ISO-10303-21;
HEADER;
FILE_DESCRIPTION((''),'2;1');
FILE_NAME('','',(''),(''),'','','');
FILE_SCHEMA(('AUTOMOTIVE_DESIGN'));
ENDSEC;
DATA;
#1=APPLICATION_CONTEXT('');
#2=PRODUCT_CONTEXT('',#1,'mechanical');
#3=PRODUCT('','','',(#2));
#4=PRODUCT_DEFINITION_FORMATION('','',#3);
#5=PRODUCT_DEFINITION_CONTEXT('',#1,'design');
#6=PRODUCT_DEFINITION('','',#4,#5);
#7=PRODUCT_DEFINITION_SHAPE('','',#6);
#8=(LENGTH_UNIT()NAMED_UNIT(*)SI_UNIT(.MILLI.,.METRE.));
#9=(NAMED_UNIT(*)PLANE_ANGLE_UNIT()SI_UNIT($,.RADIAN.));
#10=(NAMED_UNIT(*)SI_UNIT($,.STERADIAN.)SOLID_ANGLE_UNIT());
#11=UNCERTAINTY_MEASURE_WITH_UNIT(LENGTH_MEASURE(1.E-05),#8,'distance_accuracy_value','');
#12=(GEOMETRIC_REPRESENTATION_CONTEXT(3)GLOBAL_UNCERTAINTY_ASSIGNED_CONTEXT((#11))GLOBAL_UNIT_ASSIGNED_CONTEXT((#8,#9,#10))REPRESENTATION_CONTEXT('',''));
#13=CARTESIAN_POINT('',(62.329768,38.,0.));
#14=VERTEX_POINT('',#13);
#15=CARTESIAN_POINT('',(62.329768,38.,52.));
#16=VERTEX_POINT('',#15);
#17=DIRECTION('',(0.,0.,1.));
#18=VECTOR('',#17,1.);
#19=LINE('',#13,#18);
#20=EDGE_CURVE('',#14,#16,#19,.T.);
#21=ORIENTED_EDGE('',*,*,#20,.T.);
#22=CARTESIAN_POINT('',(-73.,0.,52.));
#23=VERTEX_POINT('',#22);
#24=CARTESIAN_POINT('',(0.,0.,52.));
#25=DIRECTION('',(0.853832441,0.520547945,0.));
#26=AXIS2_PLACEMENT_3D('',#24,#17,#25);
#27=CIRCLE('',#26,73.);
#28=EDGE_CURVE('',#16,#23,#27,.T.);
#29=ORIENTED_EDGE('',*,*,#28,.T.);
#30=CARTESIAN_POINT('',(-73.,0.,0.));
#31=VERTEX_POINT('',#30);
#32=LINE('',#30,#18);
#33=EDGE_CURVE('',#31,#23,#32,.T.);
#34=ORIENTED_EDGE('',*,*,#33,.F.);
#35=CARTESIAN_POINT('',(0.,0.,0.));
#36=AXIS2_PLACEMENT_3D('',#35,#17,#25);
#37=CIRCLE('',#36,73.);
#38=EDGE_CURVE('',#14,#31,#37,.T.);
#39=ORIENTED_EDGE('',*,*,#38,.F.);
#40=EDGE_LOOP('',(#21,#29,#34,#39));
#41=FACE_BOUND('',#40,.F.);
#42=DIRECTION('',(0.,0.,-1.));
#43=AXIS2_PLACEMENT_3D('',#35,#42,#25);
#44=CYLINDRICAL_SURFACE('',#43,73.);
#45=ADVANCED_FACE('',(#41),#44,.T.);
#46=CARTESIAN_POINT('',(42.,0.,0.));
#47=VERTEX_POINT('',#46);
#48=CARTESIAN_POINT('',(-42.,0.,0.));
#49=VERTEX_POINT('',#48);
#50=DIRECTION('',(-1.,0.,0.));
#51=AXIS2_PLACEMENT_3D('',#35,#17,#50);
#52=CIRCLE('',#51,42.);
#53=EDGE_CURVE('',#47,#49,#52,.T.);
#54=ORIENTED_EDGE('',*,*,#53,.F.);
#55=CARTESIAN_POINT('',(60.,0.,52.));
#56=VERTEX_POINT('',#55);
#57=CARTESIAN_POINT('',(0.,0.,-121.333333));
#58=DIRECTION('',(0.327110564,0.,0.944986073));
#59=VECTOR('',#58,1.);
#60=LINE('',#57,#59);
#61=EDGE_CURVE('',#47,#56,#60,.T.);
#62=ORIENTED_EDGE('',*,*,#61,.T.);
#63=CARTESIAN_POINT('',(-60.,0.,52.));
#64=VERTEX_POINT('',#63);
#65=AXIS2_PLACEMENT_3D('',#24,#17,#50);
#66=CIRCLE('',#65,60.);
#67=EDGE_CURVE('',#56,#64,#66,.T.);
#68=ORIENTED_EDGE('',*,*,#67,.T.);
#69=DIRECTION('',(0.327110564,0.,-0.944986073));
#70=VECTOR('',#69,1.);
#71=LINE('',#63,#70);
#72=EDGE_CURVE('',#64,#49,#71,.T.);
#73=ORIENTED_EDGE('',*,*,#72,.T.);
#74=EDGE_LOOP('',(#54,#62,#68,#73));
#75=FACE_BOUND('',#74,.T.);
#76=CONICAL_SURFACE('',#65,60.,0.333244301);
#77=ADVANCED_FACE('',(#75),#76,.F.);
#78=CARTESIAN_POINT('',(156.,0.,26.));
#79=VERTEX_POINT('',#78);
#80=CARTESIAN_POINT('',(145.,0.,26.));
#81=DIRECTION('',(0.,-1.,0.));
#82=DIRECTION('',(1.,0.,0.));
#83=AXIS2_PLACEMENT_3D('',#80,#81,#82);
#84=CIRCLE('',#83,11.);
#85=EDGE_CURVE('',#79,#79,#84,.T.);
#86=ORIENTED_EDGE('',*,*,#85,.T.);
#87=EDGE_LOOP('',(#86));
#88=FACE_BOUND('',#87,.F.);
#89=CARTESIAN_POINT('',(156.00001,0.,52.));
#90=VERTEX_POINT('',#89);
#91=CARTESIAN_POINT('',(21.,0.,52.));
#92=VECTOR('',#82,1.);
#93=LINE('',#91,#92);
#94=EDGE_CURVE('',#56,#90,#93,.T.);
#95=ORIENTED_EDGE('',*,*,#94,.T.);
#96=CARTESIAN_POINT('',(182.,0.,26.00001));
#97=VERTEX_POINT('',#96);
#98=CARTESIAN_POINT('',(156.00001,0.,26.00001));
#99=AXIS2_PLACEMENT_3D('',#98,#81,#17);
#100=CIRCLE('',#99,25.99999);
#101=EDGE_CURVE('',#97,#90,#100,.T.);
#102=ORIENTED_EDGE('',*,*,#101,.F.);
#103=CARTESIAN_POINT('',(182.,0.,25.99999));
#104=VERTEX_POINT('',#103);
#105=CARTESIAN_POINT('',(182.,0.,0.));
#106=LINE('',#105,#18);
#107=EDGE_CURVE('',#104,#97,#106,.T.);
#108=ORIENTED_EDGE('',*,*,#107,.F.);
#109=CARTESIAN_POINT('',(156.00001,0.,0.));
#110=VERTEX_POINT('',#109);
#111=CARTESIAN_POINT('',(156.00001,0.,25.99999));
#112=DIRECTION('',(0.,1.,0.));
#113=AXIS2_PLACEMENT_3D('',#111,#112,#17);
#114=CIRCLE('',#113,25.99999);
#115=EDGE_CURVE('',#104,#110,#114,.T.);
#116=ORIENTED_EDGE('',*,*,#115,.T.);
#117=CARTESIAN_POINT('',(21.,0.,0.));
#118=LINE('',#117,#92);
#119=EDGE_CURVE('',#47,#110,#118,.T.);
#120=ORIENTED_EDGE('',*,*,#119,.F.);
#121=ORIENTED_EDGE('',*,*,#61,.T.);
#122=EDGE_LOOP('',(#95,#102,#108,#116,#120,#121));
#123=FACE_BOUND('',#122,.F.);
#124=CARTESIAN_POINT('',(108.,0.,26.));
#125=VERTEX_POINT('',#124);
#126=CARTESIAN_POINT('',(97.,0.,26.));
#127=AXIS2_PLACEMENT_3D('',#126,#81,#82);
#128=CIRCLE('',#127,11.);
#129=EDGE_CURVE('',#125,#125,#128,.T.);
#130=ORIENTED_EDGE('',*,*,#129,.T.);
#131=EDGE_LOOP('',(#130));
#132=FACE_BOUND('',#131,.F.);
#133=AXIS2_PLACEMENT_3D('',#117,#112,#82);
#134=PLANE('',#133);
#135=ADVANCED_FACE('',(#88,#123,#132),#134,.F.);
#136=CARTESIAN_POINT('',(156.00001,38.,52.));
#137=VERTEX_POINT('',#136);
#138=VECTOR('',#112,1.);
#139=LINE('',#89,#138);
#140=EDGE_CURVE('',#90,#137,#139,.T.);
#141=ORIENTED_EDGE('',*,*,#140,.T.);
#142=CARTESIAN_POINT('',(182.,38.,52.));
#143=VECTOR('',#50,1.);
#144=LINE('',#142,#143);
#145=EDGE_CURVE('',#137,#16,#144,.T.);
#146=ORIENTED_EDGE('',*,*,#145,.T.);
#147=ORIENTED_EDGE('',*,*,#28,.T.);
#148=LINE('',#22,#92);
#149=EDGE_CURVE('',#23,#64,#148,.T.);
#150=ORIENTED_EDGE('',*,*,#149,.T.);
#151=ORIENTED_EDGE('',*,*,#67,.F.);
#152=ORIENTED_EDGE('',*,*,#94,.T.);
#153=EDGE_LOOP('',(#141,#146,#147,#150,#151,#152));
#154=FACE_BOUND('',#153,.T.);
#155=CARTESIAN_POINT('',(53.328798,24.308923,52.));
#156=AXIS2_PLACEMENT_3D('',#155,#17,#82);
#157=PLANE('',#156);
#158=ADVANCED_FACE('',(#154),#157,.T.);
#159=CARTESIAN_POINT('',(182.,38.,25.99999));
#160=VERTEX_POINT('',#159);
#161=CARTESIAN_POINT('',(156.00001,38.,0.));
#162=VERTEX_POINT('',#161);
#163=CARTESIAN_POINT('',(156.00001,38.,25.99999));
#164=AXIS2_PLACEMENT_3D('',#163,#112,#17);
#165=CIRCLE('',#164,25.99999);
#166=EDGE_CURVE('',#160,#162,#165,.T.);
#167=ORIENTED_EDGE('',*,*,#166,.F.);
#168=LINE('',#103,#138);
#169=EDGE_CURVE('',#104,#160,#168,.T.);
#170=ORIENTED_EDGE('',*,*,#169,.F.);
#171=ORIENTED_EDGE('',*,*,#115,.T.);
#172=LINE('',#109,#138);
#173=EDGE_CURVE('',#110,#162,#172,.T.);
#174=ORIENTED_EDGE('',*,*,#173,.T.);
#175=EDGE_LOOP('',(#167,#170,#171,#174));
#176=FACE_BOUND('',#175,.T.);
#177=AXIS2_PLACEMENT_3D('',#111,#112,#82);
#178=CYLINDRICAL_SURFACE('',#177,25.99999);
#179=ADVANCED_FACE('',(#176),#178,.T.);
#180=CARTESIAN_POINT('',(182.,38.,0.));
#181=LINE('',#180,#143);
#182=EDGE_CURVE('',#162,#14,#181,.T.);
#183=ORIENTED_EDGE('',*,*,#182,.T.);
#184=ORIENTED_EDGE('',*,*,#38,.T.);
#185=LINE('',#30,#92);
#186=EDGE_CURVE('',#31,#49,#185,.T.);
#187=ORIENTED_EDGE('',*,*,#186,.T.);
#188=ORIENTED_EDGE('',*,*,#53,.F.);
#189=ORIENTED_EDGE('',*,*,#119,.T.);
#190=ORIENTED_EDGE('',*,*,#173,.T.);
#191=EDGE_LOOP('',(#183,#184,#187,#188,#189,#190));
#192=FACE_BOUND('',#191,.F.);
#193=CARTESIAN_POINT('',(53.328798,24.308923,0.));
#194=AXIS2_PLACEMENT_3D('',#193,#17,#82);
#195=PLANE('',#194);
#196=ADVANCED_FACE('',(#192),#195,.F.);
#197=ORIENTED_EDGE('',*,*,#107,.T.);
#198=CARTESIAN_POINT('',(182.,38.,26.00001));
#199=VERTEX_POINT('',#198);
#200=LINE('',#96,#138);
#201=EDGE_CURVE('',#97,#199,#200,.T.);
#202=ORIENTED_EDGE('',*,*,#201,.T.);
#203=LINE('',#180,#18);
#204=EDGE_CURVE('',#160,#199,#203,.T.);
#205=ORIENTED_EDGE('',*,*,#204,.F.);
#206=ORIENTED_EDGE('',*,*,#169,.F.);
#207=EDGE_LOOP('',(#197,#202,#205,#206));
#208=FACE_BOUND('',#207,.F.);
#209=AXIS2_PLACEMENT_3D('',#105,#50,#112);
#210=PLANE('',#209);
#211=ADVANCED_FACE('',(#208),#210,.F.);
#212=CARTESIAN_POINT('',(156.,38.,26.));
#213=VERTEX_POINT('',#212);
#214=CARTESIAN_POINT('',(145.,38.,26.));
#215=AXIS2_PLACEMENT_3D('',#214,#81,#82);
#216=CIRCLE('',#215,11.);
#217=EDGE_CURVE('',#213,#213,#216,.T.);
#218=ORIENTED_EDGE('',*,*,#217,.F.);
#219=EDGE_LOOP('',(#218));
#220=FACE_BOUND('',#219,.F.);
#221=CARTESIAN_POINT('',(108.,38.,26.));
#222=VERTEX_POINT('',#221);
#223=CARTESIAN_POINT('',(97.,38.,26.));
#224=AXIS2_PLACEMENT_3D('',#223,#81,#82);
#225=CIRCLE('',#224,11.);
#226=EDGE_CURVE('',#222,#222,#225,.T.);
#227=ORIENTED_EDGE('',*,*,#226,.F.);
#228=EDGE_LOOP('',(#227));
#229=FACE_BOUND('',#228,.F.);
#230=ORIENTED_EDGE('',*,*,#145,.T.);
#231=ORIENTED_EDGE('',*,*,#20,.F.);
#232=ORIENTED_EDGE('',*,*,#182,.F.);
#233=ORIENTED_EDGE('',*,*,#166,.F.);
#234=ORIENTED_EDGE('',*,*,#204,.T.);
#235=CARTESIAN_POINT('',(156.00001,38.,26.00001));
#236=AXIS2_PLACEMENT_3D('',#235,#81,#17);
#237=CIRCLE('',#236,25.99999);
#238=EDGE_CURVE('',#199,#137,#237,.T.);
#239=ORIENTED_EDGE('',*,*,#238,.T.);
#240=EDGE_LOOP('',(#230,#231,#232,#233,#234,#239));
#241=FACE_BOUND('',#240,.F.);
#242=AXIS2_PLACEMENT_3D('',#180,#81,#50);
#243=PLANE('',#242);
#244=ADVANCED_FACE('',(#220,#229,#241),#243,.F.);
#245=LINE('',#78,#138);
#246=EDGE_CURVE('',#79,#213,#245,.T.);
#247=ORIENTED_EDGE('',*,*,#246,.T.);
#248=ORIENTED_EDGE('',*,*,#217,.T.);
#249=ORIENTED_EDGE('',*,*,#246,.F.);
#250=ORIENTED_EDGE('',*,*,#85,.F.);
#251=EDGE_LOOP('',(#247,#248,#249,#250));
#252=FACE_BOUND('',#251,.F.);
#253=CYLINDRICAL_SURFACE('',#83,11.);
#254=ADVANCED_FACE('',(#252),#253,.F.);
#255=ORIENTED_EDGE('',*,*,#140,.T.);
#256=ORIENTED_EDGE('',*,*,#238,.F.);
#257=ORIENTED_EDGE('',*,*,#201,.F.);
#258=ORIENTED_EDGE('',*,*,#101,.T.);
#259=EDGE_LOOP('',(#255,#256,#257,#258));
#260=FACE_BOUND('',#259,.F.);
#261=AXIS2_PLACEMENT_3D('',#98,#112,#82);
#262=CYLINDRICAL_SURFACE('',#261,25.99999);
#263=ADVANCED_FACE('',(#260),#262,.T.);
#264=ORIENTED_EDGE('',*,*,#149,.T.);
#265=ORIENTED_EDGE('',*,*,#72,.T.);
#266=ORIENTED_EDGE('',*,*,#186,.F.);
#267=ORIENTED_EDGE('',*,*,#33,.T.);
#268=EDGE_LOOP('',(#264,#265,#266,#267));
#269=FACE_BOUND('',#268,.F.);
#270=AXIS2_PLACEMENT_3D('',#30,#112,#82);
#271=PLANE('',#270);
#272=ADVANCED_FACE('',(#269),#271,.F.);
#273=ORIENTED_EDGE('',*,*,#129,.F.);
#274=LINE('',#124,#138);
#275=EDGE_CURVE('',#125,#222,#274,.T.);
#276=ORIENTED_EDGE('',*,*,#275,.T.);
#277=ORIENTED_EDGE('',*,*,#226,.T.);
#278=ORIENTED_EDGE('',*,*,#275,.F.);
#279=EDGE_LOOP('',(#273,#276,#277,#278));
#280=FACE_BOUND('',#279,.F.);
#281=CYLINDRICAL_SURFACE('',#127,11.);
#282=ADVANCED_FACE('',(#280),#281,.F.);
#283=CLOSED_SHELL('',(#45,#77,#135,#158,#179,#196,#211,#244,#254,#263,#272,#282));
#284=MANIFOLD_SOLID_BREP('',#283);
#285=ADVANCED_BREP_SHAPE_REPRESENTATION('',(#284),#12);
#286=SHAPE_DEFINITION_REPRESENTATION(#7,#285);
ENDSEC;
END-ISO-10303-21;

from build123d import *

# Parameters (mm, degrees)
F1_DEPTH = 52
F2_W     = 21
F2_H     = 52
F4_R     = 11
F5_DEPTH = 88.3
F6_R     = 25.99999


# Not quite as in the source:
# - a fillet or chamfer is up to 0.001 mm smaller than in the source, because OpenCascade refuses the exact size


with BuildPart() as f1:
    # F0 (on Top) → F1 (new body)
    with BuildSketch(Plane.XY):
        with BuildLine():
            Line((182, 38), (62.329768169, 38))
            ThreePointArc((62.329768169, 38), (-19.7348286497, 70.2818364741), (-73, 0))
            Line((-73, 0), (-21, 0))
            ThreePointArc((-21, 0), (0, 21), (21, 0))
            Line((21, 0), (73, 0))
            Line((73, 0), (182, 0))
            Line((182, 0), (182, 38))
        make_face()
    extrude(amount=F1_DEPTH)

    # F2 (on face) → F3 (revolve, cut)
    with BuildSketch(Plane.XZ):
        Polygon((-21, 52), (-60, 52), (-42, 0), (-21, 0), align=None)
        with Locations((-10.5, 26)):
            Rectangle(F2_W, F2_H)
    revolve(axis=Axis((0, 0, 26), (0, 0, 1)), mode=Mode.SUBTRACT)

    # F4 (on face) → F5 (cut)
    with BuildSketch(Plane.XZ):
        with Locations((97, 26)):
            Circle(F4_R)
        with Locations((145, 26)):
            Circle(F4_R)
    extrude(amount=-F5_DEPTH, mode=Mode.SUBTRACT)

    # F6 (radius 26 in the source; OpenCascade refuses exactly that, so slightly less here)
    f6_edges = [f1.edges().sort_by_distance(p)[0] for p in [
        (182, 19, 52),
        (182, 19, 0),
    ]]
    fillet(f6_edges, radius=F6_R)


solid = f1.part
